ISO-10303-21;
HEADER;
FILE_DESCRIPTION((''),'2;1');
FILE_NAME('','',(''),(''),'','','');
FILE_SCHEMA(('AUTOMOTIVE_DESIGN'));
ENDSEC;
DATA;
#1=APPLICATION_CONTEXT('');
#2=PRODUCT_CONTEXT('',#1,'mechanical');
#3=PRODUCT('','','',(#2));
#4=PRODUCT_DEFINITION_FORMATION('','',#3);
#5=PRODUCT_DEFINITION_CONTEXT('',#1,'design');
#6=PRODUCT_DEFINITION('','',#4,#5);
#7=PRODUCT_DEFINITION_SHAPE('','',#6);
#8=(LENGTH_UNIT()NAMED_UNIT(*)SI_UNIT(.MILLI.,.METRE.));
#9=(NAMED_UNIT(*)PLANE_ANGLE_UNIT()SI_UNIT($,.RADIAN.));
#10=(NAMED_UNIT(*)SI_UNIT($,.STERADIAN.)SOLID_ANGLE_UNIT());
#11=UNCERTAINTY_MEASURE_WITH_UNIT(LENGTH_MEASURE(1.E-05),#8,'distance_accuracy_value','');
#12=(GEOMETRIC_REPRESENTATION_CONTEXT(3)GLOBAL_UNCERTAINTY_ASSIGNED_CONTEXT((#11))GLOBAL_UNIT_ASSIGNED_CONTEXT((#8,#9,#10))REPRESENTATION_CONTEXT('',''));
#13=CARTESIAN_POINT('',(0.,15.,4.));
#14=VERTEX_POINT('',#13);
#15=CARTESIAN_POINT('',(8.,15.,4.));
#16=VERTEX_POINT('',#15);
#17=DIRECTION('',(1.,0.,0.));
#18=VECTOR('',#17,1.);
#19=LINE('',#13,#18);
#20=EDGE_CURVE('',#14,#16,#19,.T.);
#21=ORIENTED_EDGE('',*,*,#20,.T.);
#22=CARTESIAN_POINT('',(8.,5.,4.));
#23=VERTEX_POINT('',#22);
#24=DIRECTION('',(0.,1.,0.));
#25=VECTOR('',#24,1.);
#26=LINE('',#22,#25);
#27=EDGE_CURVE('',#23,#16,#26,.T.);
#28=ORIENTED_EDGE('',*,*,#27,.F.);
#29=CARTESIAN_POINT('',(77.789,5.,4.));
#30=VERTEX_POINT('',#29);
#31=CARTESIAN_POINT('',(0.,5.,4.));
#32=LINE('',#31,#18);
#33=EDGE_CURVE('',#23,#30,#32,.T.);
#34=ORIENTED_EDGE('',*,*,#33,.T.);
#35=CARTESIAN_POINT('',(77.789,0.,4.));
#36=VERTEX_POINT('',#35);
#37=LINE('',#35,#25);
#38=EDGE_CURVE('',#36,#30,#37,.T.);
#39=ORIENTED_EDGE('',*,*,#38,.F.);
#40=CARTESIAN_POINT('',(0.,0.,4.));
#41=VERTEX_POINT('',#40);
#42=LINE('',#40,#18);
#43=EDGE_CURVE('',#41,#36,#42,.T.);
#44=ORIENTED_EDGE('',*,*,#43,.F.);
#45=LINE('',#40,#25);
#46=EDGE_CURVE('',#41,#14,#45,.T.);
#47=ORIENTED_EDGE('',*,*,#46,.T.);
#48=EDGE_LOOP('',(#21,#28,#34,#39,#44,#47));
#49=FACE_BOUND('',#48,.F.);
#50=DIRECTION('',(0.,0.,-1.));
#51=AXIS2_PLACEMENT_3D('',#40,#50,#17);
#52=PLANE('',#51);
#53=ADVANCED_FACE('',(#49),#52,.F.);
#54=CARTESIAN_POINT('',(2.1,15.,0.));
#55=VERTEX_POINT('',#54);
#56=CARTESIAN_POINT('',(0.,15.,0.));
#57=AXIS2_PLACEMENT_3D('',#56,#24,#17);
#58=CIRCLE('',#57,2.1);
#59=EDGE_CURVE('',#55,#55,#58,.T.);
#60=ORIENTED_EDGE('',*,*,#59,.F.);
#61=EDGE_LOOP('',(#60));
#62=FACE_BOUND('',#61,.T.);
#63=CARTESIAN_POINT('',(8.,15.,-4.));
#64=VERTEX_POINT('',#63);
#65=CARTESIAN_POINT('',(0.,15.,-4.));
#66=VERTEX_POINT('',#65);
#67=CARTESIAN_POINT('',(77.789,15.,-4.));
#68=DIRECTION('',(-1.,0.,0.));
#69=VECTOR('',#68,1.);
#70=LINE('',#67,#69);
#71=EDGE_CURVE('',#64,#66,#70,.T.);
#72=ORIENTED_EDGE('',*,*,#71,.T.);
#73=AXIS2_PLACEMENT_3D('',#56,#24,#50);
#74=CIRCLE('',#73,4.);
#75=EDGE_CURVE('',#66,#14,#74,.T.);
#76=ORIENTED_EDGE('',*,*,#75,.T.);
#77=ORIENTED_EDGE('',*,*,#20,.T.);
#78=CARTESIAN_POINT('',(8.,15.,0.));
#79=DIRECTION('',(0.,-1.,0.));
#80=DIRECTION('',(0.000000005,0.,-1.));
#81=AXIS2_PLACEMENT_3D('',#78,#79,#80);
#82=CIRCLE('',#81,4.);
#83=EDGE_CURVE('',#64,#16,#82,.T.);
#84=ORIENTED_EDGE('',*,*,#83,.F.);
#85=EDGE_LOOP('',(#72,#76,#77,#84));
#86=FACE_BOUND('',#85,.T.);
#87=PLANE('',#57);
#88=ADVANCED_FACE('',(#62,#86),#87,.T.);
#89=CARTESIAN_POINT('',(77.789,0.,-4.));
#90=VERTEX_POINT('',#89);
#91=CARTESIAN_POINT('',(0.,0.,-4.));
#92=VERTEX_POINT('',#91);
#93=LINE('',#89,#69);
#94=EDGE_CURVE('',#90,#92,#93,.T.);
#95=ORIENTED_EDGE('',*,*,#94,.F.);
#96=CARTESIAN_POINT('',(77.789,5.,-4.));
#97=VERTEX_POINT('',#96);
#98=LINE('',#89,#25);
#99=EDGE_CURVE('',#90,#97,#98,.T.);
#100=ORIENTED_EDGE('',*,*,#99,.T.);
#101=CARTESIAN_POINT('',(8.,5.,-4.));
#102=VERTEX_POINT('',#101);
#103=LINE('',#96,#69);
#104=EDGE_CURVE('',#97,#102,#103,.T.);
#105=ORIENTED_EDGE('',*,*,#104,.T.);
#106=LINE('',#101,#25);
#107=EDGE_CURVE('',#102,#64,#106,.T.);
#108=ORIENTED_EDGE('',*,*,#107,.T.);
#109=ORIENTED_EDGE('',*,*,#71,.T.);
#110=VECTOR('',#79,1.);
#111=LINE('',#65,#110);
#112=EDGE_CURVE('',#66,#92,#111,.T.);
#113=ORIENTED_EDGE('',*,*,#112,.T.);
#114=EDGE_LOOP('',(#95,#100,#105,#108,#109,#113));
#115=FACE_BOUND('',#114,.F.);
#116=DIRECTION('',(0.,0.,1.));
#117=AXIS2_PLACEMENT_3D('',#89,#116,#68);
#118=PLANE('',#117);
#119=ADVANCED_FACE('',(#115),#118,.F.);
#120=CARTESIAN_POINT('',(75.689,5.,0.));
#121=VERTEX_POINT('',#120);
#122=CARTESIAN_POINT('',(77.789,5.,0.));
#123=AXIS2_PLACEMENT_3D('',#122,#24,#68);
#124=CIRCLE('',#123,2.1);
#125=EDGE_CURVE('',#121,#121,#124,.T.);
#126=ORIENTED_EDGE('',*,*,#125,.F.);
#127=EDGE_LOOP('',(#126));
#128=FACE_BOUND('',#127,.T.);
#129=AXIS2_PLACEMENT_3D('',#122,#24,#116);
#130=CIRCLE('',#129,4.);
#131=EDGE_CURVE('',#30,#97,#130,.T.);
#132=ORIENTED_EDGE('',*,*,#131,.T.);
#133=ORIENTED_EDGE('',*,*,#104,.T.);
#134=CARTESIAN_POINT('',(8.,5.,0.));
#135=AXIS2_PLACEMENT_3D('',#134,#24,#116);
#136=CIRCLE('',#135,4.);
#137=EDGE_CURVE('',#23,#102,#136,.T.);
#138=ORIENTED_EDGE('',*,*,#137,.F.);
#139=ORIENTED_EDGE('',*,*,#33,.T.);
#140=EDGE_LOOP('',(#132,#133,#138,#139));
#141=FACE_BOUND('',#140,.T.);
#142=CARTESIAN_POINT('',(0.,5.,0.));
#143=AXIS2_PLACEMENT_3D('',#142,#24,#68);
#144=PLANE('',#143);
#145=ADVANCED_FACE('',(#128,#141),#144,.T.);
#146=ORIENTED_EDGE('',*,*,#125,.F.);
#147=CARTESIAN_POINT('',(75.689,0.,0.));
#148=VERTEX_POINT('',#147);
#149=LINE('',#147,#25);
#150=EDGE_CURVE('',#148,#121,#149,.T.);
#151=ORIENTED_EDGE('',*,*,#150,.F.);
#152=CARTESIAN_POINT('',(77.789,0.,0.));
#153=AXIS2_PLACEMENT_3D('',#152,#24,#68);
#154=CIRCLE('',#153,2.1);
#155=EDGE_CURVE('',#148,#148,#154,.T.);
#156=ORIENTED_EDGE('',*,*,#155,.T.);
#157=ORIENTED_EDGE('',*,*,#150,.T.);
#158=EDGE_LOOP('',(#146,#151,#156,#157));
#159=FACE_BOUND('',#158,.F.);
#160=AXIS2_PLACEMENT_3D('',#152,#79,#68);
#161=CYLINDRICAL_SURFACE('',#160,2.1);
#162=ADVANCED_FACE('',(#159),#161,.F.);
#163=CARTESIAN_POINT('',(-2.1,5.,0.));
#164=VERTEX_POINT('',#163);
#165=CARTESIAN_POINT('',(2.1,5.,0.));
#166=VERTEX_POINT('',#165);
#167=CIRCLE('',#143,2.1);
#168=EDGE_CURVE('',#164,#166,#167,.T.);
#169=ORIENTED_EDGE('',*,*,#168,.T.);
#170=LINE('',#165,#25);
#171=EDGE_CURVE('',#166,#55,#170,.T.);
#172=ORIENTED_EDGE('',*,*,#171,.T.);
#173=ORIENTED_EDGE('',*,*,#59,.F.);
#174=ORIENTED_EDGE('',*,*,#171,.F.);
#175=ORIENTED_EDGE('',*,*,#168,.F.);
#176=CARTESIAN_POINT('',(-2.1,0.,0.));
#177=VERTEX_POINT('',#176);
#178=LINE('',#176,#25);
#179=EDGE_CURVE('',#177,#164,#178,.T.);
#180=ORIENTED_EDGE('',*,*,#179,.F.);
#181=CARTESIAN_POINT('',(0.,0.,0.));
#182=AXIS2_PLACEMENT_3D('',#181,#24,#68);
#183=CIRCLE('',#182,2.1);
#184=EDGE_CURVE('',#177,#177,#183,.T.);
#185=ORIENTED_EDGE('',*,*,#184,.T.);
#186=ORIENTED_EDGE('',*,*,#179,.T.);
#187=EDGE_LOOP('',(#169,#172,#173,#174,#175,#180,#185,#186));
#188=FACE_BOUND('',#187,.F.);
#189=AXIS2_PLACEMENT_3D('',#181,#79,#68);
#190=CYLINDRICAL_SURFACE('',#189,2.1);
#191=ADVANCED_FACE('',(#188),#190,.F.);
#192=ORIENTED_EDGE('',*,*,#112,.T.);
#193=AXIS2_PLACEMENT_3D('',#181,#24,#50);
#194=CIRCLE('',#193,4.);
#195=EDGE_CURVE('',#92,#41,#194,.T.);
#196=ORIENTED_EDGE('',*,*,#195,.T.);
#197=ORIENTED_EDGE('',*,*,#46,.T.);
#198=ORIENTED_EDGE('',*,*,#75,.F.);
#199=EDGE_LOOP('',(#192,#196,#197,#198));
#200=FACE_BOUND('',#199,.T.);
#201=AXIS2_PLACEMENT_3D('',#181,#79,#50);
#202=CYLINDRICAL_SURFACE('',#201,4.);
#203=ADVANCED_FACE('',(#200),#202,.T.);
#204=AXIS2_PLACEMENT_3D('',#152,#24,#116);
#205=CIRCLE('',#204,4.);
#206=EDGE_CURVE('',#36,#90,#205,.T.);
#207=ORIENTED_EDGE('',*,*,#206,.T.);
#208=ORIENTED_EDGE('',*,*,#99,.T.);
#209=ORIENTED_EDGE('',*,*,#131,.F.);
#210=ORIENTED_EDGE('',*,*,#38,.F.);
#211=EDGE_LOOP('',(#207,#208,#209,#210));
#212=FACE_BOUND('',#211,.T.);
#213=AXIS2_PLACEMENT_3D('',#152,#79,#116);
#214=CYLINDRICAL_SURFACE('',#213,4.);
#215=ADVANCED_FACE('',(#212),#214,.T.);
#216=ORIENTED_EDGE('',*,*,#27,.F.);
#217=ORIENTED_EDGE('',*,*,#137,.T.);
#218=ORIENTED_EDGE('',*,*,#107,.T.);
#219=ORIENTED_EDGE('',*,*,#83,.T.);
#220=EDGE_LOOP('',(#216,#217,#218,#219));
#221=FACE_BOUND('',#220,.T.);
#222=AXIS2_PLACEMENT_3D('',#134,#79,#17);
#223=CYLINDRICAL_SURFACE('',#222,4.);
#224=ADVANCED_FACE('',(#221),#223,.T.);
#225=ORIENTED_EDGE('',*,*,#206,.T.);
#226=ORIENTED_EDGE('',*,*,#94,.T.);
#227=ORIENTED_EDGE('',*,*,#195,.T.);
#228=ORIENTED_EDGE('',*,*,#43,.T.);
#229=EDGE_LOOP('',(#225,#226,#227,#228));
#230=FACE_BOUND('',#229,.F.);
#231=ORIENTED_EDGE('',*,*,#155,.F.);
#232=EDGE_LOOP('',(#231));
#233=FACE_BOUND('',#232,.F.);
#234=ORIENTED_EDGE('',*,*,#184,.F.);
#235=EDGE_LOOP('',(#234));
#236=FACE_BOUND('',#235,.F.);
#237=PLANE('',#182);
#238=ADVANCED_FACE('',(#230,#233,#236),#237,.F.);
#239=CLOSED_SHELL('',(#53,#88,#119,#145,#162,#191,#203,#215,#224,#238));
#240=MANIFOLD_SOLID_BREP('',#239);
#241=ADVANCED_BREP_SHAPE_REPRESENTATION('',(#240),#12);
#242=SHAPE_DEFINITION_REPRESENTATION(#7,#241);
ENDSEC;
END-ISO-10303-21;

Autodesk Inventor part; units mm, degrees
ref_plane "YZ Plane" through (0, 0, 0) normal (1, 0, 0) x (0, 1, 0)
ref_plane "XZ Plane" through (0, 0, 0) normal (0, 1, 0) x (-1, 0, 0)
ref_plane "XY Plane" through (0, 0, 0) normal (0, 0, 1) x (1, 0, 0)
sketch "Sketch1" plane through (0, 0, 0) normal (0, 1, 0) x (-1, 0, 0)
  line L0 (0, 0) -> (-77.789, 0) construction
  line L1 (0, 4) -> (-77.789, 4)
  line L2 (-77.789, -4) -> (0, -4)
  arc A0 (0, -4) -> (0, 4) centre (0, 0) ccw
  arc A1 (-77.789, 4) -> (-77.789, -4) centre (-77.789, 0) ccw
  circle A2 centre (0, 0) radius 2.1
  circle A3 centre (-77.789, 0) radius 2.1
  point P0 (-38.8945, 0)
  dimension "d0" = 77.789
  dimension "d1" = 8
  dimension "d2" = 4.2
  dimension "d10" = 4.2
extrude "Extrusion1" add sketch "Sketch1" along normal blind 5
sketch "Sketch2" plane through (0, 5, 0) normal (0, 1, 0) x (1, 0, 0)
  arc A0 (77.789, -4) -> (77.789, 4) centre (77.789, 0) ccw projected
  line L0 (77.789, 4) -> (0, 4) projected
  arc A1 (0, 4) -> (0, -4) centre (0, 0) ccw projected
  line L1 (0, -4) -> (77.789, -4) projected
  circle A2 centre (77.789, 0) radius 2.1 projected
  circle A3 centre (0, 0) radius 2.1 projected
  circle A4 centre (8, 0) radius 4
  line L2 (0, -4) -> (77.789, -4) projected
  circle A5 centre (69.789, 0) radius 4
  point P0 (69.789, -4)
  point P1 (69.789, 4)
  point P2 (8, -4)
  point P3 (8, 4)
  dimension "d11" = 8
  dimension "d12" = 8
  dimension "d13" = 8
extrude "Extrusion2" add sketch "Sketch2" along normal blind 10 contours L1 A1 L0 A4 | A4
